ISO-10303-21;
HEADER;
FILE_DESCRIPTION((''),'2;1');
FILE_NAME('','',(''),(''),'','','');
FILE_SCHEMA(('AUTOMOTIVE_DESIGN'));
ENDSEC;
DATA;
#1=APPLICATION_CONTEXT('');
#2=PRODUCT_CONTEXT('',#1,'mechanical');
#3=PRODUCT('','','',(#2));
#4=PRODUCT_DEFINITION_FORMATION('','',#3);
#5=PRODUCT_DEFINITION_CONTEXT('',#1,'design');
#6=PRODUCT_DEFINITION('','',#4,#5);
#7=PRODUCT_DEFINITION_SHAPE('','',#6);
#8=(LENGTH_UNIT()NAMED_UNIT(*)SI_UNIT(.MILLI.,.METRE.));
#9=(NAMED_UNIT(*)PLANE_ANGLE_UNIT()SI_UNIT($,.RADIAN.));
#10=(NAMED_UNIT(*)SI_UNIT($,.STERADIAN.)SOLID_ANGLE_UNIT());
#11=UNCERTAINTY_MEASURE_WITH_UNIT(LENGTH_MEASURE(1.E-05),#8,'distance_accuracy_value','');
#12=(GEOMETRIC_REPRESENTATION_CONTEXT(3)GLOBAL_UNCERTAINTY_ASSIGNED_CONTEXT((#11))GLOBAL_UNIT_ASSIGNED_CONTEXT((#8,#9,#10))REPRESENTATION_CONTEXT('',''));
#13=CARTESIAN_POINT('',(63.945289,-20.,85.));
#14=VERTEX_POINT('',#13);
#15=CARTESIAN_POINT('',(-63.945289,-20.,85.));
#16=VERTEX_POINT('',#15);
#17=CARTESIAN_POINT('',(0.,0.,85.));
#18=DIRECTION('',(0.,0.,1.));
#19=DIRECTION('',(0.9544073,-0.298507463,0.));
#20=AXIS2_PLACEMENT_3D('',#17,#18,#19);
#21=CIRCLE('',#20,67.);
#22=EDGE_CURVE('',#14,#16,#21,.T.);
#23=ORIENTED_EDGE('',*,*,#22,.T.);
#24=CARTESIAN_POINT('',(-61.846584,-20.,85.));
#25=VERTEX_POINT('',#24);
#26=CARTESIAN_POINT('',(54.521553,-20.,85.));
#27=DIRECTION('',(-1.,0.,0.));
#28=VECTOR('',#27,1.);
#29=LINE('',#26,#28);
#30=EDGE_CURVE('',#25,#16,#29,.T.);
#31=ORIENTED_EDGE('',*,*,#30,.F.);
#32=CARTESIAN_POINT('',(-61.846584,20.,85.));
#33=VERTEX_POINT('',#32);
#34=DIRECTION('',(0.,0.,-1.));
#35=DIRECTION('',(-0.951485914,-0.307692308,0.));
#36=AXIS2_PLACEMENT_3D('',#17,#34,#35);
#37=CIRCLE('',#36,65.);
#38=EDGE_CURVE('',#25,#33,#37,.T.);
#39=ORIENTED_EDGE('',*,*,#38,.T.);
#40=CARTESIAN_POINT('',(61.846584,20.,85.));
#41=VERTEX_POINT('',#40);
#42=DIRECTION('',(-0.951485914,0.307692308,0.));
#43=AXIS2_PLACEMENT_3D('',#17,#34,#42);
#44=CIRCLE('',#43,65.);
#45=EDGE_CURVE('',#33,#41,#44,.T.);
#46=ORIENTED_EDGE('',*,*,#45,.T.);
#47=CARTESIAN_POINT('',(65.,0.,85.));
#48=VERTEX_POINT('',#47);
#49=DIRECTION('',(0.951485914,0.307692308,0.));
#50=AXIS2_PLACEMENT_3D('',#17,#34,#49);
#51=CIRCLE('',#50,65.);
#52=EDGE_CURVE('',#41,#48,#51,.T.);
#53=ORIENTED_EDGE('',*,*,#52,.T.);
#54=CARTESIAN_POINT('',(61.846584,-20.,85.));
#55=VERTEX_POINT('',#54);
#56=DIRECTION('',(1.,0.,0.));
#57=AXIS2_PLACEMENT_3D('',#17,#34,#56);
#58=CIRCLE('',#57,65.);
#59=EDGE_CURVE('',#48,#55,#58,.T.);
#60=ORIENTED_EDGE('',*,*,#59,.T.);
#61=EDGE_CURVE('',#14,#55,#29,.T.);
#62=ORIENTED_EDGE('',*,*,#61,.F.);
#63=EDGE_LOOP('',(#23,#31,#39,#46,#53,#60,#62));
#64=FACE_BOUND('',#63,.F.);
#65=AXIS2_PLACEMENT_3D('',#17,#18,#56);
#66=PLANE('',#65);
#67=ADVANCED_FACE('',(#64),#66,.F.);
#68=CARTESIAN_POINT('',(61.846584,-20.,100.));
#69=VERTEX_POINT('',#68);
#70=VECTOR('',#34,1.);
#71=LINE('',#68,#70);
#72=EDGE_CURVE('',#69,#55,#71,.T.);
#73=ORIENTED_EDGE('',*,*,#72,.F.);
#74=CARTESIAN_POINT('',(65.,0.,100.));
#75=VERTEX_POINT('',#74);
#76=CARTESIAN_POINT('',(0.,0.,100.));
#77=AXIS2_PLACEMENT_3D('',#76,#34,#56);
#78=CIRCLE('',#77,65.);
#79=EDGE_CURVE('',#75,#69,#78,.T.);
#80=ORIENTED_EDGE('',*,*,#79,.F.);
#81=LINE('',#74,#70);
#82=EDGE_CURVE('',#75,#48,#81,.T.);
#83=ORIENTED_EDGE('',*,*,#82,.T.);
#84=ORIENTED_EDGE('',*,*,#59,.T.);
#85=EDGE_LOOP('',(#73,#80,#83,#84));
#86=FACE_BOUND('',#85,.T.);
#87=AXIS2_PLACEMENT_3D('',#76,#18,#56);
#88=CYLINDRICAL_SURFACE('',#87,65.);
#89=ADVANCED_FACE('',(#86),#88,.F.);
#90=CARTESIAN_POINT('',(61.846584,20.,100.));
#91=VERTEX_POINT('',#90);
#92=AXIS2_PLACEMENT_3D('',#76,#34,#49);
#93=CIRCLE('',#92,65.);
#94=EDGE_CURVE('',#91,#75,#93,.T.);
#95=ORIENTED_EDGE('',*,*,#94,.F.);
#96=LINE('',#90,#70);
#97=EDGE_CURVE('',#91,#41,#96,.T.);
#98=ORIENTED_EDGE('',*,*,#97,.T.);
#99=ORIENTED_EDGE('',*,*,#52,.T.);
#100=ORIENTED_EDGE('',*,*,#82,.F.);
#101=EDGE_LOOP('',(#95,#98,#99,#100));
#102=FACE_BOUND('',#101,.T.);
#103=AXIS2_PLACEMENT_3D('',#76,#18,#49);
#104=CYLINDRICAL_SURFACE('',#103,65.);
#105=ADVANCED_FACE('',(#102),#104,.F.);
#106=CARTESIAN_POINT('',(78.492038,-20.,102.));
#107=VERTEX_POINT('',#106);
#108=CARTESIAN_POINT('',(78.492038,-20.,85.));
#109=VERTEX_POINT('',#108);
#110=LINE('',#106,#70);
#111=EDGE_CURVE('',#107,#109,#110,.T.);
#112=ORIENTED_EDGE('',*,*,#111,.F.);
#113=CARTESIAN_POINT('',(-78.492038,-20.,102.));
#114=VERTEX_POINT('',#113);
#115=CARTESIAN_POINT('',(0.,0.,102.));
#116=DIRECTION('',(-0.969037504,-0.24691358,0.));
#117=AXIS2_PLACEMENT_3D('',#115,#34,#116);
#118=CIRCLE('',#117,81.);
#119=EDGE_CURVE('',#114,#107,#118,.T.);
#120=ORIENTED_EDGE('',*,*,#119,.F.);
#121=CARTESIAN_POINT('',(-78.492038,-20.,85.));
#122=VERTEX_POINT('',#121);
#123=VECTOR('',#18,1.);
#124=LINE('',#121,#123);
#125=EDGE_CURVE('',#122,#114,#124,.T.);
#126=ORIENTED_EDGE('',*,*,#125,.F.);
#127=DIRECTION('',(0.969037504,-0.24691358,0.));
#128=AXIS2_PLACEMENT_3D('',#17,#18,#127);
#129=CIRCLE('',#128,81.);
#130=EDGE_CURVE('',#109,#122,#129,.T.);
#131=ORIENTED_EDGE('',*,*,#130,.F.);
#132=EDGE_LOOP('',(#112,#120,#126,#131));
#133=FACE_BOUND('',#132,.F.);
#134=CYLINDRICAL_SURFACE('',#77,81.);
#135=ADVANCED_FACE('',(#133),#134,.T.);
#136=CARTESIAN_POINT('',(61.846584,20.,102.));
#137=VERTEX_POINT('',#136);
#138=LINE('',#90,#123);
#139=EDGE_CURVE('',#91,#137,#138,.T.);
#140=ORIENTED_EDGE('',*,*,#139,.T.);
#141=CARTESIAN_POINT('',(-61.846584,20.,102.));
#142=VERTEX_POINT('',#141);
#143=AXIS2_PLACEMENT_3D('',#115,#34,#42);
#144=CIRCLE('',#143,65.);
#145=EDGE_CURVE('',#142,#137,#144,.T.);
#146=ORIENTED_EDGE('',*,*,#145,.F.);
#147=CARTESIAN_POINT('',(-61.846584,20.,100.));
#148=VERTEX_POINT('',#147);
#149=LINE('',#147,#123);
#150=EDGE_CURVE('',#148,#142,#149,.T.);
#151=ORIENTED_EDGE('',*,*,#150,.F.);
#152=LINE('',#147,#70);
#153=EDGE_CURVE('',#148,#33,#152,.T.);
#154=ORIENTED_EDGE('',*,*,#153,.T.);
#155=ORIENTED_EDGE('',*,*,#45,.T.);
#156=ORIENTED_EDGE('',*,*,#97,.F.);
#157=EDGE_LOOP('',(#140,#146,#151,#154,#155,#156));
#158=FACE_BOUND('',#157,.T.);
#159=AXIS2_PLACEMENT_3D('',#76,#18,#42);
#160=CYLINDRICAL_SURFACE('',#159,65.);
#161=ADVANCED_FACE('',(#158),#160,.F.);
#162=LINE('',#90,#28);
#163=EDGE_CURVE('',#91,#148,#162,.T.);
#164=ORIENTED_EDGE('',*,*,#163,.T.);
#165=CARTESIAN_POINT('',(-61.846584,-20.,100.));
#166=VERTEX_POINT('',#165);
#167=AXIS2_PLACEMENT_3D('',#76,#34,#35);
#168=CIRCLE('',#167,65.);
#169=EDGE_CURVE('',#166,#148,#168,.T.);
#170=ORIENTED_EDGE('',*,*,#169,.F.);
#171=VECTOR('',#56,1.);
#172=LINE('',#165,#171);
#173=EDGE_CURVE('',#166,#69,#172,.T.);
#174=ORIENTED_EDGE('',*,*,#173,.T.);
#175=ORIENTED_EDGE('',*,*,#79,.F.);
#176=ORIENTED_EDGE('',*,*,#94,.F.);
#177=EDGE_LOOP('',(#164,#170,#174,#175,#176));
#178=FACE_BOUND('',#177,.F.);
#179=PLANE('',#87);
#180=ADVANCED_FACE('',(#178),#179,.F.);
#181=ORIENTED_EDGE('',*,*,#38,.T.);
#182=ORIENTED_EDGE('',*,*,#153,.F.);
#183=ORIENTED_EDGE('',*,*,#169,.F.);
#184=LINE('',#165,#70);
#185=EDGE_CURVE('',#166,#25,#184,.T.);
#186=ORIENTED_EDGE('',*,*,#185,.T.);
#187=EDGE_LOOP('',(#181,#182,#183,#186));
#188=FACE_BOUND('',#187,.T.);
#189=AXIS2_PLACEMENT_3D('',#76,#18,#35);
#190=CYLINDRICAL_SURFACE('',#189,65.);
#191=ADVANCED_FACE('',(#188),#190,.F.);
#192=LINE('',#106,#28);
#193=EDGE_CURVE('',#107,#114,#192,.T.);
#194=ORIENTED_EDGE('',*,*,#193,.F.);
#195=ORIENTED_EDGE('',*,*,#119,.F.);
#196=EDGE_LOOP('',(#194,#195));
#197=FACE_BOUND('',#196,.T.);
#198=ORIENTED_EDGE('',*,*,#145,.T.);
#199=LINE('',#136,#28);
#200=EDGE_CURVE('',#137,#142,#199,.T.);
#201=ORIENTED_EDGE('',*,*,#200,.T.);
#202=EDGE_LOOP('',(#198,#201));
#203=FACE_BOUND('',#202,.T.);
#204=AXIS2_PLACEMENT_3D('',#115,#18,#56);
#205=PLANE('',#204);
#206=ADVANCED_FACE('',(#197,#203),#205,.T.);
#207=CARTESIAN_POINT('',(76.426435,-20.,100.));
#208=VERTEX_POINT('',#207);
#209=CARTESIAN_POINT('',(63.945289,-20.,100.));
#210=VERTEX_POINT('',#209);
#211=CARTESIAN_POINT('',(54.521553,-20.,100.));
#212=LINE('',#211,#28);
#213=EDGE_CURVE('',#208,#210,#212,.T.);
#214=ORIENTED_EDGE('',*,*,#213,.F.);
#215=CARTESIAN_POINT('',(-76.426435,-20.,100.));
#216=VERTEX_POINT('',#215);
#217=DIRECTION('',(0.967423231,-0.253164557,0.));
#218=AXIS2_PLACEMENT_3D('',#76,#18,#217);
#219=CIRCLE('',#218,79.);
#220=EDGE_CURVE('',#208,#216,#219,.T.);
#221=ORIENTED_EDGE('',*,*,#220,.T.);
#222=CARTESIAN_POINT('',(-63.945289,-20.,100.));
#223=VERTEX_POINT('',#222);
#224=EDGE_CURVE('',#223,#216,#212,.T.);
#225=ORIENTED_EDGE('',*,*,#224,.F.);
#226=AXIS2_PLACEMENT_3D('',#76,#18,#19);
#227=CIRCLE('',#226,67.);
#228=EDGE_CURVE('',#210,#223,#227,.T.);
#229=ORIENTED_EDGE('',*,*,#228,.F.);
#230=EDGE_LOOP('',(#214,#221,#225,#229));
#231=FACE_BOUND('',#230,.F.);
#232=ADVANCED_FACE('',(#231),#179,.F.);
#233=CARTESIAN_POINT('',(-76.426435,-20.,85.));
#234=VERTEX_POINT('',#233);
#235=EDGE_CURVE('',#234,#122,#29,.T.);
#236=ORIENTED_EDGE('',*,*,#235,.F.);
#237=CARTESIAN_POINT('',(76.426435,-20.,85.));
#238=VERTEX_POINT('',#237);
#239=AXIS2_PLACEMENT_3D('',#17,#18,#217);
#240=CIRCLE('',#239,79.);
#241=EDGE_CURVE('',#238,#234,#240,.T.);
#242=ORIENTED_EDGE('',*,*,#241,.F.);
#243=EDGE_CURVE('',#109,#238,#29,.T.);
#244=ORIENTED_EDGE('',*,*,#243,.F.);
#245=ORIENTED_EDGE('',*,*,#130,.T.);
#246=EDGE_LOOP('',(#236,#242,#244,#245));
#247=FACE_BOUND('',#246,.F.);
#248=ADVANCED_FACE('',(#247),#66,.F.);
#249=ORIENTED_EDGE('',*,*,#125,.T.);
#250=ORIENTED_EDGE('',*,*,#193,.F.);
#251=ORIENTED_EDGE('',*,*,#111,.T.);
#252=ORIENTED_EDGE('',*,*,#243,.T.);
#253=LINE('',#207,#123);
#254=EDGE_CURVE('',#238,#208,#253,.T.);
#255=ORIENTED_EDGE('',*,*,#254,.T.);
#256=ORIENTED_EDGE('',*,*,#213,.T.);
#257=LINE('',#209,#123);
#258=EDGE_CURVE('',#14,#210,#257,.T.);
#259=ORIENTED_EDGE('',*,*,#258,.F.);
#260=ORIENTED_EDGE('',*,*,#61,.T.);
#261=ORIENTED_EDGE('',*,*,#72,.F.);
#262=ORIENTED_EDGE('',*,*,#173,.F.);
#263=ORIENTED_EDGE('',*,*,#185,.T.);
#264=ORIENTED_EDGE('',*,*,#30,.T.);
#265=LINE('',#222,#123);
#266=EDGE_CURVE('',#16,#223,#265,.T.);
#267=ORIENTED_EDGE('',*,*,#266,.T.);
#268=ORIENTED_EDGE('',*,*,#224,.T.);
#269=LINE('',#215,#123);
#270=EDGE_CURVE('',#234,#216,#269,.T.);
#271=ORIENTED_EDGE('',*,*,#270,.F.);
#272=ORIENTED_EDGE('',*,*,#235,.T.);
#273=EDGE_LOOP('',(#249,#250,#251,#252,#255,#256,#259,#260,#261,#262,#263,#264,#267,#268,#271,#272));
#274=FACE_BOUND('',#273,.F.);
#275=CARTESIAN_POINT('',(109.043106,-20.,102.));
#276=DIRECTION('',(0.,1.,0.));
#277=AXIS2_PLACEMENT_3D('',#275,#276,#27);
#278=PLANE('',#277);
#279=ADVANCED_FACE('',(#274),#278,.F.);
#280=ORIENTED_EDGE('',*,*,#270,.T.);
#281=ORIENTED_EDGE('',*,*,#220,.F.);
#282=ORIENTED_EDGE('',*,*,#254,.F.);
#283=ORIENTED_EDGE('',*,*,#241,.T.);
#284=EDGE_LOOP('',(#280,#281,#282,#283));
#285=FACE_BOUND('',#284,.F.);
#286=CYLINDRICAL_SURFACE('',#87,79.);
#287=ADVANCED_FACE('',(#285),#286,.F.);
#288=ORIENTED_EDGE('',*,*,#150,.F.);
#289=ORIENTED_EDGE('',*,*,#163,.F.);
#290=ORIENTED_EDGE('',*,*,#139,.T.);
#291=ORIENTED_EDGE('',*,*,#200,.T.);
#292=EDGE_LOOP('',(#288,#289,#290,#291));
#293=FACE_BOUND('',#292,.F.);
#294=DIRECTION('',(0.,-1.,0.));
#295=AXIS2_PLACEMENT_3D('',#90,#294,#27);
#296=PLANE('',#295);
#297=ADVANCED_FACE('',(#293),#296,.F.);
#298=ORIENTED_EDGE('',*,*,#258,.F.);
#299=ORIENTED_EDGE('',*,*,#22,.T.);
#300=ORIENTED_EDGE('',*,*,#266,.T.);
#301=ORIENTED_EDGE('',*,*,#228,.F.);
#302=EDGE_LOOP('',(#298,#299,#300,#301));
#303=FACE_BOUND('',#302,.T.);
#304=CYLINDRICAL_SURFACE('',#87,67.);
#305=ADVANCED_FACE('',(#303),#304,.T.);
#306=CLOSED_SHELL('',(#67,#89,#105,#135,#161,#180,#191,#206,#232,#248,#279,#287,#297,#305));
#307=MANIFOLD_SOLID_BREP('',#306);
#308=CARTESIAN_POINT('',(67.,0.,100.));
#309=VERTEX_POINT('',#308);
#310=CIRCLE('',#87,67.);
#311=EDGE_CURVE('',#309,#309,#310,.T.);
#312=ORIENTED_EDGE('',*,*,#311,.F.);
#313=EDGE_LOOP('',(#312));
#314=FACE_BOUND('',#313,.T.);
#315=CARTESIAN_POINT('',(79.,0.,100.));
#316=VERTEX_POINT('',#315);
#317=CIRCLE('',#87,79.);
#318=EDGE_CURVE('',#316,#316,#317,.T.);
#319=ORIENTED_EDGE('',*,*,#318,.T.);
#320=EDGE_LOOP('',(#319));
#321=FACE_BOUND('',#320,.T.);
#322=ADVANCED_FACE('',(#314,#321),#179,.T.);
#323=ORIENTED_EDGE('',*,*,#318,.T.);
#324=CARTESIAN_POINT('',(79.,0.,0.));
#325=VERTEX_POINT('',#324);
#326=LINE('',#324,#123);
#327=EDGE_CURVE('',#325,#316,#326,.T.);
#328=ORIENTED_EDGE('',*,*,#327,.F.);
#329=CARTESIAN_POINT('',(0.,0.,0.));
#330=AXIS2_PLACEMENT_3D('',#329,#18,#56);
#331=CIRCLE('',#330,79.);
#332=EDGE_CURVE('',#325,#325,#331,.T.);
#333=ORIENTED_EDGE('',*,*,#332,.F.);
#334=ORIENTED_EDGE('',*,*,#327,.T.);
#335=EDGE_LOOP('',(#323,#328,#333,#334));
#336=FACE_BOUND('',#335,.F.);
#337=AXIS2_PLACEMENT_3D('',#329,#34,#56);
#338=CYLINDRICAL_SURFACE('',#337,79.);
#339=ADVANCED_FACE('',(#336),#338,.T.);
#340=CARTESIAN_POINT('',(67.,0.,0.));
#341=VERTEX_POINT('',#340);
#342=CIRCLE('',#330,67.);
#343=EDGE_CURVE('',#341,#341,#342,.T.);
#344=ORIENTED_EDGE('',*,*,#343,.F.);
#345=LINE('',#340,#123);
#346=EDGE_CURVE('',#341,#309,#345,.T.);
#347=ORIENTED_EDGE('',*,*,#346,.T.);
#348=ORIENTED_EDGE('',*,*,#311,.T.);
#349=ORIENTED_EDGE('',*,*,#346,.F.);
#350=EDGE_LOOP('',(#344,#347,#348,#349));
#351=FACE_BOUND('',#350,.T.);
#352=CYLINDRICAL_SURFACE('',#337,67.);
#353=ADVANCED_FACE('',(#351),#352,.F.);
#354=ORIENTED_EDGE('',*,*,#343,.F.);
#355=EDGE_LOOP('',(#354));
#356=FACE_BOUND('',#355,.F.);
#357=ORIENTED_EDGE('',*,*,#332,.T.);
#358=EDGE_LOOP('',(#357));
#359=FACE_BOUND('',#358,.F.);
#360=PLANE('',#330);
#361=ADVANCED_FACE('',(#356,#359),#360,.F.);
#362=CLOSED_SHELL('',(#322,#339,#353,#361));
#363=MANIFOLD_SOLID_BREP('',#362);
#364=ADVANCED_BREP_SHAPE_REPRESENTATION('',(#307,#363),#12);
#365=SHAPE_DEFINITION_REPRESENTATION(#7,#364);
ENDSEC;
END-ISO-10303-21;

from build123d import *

# Parameters (mm, degrees)
F0_R        = 79
F0_R_2      = 67
F1_DEPTH    = 100
F2_R        = 81
F2_R_2      = 79
F3_DEPTH    = 15
F2_R_3      = 67
F1_FACE_R   = 79
F1_FACE_R_2 = 67
F4_DEPTH    = 2
F6_DEPTH    = 25


with BuildPart() as f1:
    # F0 (on Top) → F1 (new body)
    with BuildSketch(Plane.XY):
        Circle(F0_R)
        Circle(F0_R_2, mode=Mode.SUBTRACT)
    extrude(amount=F1_DEPTH)


with BuildPart() as f3:
    # F2 (on face) → F3 (new body)
    with BuildSketch(Plane.XY.offset(100)):
        Circle(F2_R)
        Circle(F2_R_2, mode=Mode.SUBTRACT)
    extrude(amount=-F3_DEPTH)



with BuildPart() as f3b:
    # F2 (on face) → F3, piece 2 (new body)
    with BuildSketch(Plane.XY.offset(100)):
        Circle(F2_R_3)
        with BuildLine():
            ThreePointArc((61.8465843843, 20), (64.2068064343, 10.1235373023), (65, 0))
            ThreePointArc((65, 0), (64.2068064343, -10.1235373023), (61.8465843843, -20))
            ThreePointArc((61.8465843843, -20), (0, -65), (-61.8465843843, -20))
            ThreePointArc((-61.8465843843, -20), (-65, 0), (-61.8465843843, 20))
            ThreePointArc((-61.8465843843, 20), (0, 65), (61.8465843843, 20))
        make_face(mode=Mode.SUBTRACT)
    extrude(amount=-F3_DEPTH)


with BuildPart() as f3_1:
    add(f3.part)

    add(f3b.part)  # F4 merges F3b
    # F2 (on face) + F1_face (on face) → F4 (join)
    with BuildSketch(Plane.XY.offset(100)):
        Circle(F2_R)
        Circle(F2_R_2, mode=Mode.SUBTRACT)
        Circle(F2_R_3)
        with BuildLine():
            ThreePointArc((61.8465843843, 20), (64.2068064343, 10.1235373023), (65, 0))
            ThreePointArc((65, 0), (64.2068064343, -10.1235373023), (61.8465843843, -20))
            ThreePointArc((61.8465843843, -20), (0, -65), (-61.8465843843, -20))
            ThreePointArc((-61.8465843843, -20), (-65, 0), (-61.8465843843, 20))
            ThreePointArc((-61.8465843843, 20), (0, 65), (61.8465843843, 20))
        make_face(mode=Mode.SUBTRACT)
        with BuildLine():
            ThreePointArc((61.8465843843, -20), (64.2068064343, -10.1235373023), (65, 0))
            ThreePointArc((65, 0), (64.2068064343, 10.1235373023), (61.8465843843, 20))
            Line((61.8465843843, 20), (-61.8465843843, 20))
            ThreePointArc((-61.8465843843, 20), (-65, 0), (-61.8465843843, -20))
            Line((-61.8465843843, -20), (61.8465843843, -20))
        make_face()
    with BuildSketch(Plane.XY.offset(100)):
        Circle(F1_FACE_R)
        Circle(F1_FACE_R_2, mode=Mode.SUBTRACT)
    extrude(amount=F4_DEPTH)

    # F5 (on face) → F6 (cut)
    with BuildSketch(Plane.XY.offset(102)):
        Polygon((109.0431064367, -96.566259861), (109.0431064367, -20), (61.8465843843, -20), (-61.8465843843, -20), (-82.0130482316, -20), (-82.0130482316, -96.566259861), align=None)
    extrude(amount=-F6_DEPTH, mode=Mode.SUBTRACT)


solid = Compound([f1.part, f3_1.part])
